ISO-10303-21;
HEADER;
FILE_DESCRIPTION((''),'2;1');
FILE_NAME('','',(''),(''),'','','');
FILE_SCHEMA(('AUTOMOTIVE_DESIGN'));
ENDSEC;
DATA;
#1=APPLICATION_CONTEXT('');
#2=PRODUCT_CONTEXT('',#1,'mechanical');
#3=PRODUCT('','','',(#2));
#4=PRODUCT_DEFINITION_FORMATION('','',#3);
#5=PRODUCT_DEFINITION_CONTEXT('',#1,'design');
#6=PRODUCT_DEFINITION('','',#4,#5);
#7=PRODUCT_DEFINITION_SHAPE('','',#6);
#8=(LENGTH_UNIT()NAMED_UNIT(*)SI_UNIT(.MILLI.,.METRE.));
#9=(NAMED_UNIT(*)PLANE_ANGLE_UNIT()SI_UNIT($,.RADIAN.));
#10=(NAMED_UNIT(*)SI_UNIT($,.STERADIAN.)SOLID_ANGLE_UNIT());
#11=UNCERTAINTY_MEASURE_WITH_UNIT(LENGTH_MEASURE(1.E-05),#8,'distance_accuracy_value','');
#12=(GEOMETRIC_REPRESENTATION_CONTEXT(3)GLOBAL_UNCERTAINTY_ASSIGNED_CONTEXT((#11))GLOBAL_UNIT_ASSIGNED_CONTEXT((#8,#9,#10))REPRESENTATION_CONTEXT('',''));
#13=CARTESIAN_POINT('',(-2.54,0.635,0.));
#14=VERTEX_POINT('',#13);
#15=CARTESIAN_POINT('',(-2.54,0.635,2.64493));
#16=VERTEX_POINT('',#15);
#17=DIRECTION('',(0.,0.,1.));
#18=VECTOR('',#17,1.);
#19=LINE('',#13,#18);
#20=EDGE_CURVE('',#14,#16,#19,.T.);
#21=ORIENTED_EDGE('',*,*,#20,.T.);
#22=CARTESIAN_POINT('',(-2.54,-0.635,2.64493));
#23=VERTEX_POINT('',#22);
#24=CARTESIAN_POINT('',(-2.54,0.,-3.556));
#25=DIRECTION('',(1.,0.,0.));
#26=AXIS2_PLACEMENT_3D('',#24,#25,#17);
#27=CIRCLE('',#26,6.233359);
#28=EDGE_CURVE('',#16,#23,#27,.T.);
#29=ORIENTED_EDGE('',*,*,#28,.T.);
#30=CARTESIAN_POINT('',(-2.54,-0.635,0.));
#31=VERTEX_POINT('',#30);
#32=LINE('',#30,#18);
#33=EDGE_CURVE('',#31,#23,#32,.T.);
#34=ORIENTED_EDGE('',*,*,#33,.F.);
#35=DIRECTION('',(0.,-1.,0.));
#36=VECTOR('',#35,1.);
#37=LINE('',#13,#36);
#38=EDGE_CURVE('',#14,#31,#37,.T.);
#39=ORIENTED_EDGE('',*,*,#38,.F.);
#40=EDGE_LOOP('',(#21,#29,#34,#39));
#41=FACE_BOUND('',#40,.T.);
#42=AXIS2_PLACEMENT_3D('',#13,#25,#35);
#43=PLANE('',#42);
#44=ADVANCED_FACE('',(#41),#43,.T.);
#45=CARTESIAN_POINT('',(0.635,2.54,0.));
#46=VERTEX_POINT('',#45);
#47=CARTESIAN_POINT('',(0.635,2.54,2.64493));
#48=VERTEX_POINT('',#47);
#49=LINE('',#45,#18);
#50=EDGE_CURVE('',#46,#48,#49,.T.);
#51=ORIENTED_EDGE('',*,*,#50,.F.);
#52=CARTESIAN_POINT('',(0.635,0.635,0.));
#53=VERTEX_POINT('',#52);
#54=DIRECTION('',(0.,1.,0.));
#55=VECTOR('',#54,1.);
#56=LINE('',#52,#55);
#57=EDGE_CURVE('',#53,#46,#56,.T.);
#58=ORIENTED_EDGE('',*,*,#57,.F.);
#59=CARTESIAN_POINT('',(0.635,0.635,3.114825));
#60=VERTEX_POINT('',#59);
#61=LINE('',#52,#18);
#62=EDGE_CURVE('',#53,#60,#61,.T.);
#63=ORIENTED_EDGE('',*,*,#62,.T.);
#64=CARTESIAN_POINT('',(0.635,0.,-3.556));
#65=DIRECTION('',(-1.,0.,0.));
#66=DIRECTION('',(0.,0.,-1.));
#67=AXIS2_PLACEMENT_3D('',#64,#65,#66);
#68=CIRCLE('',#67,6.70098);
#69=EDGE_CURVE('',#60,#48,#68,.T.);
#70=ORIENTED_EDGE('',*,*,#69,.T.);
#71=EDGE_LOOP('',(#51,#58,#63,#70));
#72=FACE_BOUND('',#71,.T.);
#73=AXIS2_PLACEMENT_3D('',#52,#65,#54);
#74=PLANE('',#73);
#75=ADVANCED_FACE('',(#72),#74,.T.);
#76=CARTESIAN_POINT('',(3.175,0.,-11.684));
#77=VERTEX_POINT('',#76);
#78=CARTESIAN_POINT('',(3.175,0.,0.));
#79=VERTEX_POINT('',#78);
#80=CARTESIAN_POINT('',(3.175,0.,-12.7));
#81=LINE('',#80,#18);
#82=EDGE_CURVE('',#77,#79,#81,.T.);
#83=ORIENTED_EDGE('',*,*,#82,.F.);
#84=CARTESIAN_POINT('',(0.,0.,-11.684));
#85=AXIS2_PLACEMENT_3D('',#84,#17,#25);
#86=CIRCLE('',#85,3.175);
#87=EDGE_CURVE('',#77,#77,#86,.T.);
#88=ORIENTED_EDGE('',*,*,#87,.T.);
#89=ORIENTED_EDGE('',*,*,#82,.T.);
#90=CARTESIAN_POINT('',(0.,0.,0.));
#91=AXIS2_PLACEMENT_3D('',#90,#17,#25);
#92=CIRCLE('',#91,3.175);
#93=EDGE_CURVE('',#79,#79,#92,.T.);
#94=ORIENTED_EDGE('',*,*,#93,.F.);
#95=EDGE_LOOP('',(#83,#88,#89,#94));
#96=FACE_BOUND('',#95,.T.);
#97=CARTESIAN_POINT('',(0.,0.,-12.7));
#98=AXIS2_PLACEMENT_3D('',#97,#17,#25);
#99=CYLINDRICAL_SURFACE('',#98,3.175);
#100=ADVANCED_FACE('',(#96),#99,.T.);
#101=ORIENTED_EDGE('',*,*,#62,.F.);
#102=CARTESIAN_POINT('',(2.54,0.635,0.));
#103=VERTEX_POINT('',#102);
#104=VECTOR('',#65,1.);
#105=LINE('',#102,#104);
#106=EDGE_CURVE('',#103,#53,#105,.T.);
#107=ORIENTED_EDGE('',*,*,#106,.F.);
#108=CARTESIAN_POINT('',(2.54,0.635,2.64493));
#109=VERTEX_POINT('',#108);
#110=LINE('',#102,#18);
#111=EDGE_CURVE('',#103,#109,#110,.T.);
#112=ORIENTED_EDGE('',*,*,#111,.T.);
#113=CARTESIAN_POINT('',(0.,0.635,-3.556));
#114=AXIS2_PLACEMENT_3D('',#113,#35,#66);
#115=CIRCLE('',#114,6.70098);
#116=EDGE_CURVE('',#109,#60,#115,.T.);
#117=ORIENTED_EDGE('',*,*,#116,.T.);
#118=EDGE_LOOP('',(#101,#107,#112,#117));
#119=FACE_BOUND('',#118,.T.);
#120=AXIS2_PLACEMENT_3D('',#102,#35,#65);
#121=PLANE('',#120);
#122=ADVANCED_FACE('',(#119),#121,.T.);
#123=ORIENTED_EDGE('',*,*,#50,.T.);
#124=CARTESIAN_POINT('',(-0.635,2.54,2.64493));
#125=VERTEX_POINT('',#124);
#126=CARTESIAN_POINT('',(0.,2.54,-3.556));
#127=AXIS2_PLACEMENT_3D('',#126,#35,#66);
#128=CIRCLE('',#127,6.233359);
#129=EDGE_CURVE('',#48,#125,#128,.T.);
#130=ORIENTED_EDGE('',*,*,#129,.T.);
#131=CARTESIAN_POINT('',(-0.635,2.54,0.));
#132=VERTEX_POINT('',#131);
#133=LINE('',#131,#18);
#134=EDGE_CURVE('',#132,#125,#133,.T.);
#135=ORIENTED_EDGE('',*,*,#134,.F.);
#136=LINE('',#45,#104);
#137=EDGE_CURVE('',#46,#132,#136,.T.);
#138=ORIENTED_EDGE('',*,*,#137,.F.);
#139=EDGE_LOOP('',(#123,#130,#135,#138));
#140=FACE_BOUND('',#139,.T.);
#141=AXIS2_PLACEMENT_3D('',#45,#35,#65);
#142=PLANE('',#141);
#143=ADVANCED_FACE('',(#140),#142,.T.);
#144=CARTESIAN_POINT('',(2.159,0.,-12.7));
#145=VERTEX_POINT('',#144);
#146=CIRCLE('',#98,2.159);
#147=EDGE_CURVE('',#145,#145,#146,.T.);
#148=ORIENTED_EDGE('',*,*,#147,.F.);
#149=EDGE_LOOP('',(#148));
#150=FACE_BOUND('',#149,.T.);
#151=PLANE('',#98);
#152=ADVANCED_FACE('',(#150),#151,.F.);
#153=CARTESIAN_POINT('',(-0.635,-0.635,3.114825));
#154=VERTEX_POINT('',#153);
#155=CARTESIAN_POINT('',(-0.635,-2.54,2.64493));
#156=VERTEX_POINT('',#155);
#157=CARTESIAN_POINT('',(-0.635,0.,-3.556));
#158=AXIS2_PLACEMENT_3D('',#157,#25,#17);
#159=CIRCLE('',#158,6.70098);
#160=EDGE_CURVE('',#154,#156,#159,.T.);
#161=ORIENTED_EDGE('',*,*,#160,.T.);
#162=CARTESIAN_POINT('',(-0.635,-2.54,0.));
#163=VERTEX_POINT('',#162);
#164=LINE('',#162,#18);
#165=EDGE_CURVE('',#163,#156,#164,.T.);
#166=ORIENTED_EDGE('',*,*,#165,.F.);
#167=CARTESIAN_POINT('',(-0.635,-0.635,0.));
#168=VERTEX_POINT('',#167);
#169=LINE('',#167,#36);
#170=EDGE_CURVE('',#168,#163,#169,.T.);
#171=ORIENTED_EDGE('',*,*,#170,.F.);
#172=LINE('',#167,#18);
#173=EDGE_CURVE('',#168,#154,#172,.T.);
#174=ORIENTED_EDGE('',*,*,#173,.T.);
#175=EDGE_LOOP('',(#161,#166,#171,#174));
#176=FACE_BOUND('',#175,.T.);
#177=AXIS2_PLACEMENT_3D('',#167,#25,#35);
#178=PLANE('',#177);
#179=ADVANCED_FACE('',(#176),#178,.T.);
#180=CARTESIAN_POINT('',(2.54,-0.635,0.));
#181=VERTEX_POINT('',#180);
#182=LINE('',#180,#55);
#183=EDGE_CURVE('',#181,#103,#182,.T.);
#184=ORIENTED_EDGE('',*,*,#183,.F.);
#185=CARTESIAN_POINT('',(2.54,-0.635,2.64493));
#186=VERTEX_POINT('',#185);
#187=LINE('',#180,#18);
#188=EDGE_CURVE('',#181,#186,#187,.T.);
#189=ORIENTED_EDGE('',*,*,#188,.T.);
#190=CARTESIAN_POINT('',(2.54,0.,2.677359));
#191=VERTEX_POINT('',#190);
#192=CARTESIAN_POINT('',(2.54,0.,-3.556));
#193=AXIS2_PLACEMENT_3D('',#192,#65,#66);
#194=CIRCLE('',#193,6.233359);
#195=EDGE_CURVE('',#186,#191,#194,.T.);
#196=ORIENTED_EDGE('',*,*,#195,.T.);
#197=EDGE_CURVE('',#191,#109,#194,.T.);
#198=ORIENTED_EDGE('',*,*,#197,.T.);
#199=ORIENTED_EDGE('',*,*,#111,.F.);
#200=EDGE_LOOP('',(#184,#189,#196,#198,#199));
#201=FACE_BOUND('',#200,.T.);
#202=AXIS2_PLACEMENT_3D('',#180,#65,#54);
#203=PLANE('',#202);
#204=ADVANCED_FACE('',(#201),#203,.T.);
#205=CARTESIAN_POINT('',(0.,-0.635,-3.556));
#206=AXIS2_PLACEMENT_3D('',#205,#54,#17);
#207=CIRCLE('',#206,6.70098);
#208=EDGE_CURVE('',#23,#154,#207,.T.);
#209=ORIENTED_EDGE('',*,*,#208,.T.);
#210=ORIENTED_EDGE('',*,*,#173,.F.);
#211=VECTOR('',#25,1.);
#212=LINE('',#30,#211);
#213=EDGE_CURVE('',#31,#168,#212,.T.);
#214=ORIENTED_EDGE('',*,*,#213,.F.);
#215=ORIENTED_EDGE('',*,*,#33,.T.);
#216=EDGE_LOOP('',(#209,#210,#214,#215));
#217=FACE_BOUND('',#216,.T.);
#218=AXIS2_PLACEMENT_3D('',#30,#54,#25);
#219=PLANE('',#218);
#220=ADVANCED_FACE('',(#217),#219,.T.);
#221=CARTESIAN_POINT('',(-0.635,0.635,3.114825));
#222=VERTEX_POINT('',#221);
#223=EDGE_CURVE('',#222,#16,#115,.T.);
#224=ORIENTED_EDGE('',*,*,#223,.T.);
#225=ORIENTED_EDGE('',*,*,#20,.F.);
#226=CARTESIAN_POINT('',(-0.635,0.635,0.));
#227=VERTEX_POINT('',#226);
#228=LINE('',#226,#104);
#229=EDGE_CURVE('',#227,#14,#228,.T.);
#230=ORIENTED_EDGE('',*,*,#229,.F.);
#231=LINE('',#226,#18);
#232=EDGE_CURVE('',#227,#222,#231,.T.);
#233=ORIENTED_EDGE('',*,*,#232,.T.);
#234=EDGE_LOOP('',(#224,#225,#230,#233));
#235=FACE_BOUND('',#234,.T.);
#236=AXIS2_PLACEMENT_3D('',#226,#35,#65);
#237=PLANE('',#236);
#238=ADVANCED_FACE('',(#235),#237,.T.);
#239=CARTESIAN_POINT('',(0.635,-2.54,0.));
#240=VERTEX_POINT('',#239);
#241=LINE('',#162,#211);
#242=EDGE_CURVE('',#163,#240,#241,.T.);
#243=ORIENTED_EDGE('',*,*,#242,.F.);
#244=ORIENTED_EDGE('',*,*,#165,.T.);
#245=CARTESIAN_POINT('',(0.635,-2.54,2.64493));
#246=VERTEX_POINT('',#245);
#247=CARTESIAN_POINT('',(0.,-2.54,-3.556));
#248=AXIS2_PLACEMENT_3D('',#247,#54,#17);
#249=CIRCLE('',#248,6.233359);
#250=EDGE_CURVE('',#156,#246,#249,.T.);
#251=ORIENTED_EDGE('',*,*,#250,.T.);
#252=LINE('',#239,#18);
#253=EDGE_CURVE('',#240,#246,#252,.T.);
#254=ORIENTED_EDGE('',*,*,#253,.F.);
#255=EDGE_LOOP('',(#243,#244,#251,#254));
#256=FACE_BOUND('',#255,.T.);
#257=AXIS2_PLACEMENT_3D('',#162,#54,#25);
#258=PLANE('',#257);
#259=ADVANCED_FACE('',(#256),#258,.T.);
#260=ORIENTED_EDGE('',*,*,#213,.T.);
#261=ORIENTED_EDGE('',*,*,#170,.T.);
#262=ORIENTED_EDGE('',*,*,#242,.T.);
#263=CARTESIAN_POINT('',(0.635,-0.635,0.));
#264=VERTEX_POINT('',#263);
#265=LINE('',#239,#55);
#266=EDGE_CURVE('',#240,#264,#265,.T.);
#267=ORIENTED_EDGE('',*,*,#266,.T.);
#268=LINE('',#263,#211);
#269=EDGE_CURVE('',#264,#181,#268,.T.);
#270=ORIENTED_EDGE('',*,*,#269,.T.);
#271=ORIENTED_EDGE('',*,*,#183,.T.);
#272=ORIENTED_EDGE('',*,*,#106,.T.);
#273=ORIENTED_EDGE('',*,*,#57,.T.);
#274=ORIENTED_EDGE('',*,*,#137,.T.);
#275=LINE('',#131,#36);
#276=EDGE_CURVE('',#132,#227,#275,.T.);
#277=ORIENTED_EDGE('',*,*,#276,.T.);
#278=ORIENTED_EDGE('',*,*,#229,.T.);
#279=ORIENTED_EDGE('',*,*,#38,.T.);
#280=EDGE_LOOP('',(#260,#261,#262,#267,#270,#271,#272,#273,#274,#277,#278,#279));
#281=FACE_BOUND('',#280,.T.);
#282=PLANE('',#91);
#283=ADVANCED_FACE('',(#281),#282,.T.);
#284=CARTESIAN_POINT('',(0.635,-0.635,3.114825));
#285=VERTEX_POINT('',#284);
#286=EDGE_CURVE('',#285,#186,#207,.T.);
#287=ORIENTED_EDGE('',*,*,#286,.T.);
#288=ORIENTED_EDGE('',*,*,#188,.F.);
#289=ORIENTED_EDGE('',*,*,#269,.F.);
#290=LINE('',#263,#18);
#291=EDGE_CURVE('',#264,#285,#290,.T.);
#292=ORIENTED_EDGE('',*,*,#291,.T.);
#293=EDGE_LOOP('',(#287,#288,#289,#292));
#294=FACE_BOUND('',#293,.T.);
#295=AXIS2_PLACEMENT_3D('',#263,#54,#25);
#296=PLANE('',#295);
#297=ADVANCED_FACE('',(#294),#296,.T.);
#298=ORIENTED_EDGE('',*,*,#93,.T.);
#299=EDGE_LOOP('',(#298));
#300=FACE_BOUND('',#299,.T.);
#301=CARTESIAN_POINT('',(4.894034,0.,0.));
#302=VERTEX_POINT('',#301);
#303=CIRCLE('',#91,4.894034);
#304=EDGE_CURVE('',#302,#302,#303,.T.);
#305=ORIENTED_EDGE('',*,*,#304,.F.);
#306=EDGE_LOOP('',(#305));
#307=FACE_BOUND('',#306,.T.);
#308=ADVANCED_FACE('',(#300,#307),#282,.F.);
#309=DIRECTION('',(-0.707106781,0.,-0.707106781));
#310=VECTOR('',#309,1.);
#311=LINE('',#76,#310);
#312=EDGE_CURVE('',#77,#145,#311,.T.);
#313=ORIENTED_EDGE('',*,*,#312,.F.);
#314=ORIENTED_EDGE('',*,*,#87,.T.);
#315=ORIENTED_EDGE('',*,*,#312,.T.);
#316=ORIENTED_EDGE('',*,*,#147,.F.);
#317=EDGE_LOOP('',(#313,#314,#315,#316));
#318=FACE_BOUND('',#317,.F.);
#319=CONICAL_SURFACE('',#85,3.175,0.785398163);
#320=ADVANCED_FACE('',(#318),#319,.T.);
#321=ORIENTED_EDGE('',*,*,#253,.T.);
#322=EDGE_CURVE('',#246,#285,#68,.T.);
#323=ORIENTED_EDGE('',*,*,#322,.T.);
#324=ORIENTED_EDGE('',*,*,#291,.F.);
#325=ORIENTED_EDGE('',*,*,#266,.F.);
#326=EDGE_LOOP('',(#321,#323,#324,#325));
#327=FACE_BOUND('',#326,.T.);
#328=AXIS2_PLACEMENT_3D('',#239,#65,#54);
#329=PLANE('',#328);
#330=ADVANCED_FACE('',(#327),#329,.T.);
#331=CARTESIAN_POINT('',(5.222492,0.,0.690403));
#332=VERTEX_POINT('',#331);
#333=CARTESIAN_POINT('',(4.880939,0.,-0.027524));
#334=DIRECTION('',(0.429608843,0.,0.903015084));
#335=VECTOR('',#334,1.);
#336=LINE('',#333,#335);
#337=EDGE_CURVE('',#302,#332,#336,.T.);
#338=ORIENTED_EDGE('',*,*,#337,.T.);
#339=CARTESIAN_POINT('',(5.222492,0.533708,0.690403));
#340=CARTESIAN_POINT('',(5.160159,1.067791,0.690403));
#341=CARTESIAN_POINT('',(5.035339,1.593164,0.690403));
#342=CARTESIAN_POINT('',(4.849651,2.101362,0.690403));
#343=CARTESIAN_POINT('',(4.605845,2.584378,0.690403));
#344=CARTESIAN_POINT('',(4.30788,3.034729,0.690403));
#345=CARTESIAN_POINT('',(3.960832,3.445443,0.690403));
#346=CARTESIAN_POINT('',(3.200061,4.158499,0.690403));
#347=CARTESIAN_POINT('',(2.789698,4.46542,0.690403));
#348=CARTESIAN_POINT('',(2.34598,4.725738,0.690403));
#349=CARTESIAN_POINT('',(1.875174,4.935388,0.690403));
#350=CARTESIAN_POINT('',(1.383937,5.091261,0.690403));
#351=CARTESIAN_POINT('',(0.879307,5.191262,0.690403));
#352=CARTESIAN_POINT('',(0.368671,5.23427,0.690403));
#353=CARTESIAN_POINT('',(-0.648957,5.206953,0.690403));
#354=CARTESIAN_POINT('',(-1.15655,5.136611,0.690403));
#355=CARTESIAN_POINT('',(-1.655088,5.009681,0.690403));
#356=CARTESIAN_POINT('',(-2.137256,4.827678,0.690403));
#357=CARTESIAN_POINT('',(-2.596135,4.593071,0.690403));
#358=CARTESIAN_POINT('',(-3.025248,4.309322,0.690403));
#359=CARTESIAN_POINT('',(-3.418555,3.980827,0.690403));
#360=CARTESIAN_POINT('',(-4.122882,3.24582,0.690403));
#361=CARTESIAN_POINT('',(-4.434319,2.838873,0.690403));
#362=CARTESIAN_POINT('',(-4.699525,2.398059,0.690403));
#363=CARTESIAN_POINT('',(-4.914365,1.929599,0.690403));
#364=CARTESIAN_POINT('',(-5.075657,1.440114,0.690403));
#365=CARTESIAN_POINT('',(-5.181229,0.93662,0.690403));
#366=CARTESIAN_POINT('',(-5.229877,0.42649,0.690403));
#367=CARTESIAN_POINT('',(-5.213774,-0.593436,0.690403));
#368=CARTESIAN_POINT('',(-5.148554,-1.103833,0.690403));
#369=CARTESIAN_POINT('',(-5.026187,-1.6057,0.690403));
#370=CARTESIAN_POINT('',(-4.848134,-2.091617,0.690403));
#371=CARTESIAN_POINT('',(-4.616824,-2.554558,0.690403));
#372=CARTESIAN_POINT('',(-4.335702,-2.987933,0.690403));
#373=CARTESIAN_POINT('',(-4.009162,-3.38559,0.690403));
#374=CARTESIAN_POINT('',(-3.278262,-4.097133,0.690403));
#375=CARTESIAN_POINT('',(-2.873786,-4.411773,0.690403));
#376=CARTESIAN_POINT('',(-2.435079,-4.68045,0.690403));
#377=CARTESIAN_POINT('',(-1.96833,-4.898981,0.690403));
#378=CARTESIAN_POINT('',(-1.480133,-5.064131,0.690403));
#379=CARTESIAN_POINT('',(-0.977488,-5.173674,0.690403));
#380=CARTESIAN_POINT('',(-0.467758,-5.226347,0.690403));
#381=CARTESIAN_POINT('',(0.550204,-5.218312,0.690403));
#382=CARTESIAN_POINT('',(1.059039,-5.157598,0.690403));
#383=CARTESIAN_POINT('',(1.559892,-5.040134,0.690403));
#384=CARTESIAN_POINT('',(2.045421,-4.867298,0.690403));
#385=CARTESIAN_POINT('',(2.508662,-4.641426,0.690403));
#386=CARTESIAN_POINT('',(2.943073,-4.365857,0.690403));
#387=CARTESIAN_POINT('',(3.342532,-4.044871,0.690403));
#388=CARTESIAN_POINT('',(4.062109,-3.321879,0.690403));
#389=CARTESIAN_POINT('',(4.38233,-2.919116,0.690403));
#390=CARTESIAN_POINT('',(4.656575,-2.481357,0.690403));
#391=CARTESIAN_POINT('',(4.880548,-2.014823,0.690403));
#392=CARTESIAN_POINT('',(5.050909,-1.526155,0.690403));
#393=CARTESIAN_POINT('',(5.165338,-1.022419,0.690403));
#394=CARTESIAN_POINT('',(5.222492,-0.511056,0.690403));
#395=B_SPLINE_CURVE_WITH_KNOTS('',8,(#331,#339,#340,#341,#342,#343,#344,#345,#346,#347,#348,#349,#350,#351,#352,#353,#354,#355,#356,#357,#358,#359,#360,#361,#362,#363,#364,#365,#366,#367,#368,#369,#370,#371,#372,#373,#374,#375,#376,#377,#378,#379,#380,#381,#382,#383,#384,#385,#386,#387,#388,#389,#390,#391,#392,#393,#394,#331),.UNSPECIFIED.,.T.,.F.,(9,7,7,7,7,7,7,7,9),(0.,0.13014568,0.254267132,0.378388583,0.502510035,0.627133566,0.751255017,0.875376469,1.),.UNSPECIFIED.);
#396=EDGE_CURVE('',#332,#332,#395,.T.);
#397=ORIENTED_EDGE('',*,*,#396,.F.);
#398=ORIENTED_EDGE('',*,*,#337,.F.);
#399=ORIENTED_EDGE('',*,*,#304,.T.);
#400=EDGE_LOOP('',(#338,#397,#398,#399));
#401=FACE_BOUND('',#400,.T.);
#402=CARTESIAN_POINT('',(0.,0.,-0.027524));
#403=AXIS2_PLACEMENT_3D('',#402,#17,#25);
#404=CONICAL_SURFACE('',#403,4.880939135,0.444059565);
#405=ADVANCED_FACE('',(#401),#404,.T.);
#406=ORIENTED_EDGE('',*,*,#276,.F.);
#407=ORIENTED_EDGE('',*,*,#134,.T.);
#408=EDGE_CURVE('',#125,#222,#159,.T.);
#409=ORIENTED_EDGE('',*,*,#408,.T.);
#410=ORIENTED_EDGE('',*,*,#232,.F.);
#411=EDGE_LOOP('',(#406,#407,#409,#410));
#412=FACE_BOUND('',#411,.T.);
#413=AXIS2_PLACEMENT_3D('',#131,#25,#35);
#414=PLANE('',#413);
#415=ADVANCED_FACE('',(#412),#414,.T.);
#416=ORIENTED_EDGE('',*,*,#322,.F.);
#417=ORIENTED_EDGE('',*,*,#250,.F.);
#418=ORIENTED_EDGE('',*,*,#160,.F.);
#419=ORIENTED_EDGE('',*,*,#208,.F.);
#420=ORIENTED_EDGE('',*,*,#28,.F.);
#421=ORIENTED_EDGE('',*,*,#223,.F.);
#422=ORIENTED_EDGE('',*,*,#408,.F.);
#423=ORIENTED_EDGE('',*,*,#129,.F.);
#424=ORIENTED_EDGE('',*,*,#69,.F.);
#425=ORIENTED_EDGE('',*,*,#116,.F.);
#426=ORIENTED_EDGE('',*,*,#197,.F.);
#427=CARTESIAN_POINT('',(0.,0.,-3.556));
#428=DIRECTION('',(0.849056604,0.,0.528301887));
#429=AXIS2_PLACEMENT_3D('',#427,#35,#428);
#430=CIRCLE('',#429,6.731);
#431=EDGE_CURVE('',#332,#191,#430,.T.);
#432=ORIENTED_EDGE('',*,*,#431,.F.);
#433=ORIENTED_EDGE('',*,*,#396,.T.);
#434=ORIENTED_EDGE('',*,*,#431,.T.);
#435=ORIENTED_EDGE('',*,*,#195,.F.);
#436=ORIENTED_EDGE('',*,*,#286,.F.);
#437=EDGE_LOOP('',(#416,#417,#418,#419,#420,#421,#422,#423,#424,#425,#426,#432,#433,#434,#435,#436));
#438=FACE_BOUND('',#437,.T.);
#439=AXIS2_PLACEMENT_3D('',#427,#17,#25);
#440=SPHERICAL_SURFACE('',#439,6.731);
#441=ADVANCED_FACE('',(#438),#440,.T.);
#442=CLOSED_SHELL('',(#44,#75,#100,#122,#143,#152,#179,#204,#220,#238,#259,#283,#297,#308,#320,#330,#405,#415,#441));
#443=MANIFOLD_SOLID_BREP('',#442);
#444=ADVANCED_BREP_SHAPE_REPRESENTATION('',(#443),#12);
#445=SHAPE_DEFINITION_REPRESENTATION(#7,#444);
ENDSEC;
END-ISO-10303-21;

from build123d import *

# Parameters (mm, degrees)
F4_DEPTH = 3.176
F5_SIZE  = 1.016


# Not quite as in the source:
# - a fillet or chamfer that OpenCascade refuses, or shapes differently, is made with other operations: its cross-section is extruded or revolved along the edge and cut away or added


with BuildPart() as f1:
    # F0 (on Front) → F1 (revolve)
    with BuildSketch(Plane.XZ):
        with BuildLine():
            Line((3.175, 0), (5.715, 0))
            ThreePointArc((5.715, 0), (3.2688625698, 2.3279526256), (0, 3.175))
            Line((0, 3.175), (0, -12.7))
            Line((0, -12.7), (3.175, -12.7))
            Line((3.175, -12.7), (3.175, 0))
        make_face()
    revolve(axis=Axis((0, 0, -4.7625), (0, 0, 1)))

    # F2: chamfer of 0.762 on 1 edges, made by hand

    # F2_s1 → F2_t2 (revolve, cut)
    with BuildSketch(Plane.XZ):
        with BuildLine():
            Line((4.8809391349, -0.0275238998), (5.2355867217, 0.7179265843))
            Line((5.2355867217, 0.7179265843), (5.2474112325, 0.727541081))
            ThreePointArc((5.2474112325, 0.727541081), (5.4877257432, 0.3678527374), (5.7279396226, 0.0080513208))
            Line((5.7279396226, 0.0080513208), (5.715, -0.01524))
            ThreePointArc((5.715, -0.01524), (5.2979695675, -0.01524), (4.8809391349, -0.0427638998))
            Line((4.8809391349, -0.0427638998), (4.8809391349, -0.0275238998))
        make_face()
    revolve(axis=Axis((0, 0, 0), (0, 0, 1)), mode=Mode.SUBTRACT)

    # F3 (on Top) → F4 (cut, through all)
    with BuildSketch(Plane.XY):
        Polygon((0.635, 2.54), (-0.635, 2.54), (-0.635, 0.635), (-2.54, 0.635), (-2.54, -0.635), (-0.635, -0.635), (-0.635, -2.54), (0.635, -2.54), (0.635, -0.635), (2.54, -0.635), (2.54, 0.635), (0.635, 0.635), align=None)
    extrude(amount=F4_DEPTH, mode=Mode.SUBTRACT)

    # F5
    f5_edges = [f1.edges().sort_by_distance(p)[0] for p in [
        (-3.175, 0, -12.7),
    ]]
    chamfer(f5_edges, length=F5_SIZE)


solid = f1.part
